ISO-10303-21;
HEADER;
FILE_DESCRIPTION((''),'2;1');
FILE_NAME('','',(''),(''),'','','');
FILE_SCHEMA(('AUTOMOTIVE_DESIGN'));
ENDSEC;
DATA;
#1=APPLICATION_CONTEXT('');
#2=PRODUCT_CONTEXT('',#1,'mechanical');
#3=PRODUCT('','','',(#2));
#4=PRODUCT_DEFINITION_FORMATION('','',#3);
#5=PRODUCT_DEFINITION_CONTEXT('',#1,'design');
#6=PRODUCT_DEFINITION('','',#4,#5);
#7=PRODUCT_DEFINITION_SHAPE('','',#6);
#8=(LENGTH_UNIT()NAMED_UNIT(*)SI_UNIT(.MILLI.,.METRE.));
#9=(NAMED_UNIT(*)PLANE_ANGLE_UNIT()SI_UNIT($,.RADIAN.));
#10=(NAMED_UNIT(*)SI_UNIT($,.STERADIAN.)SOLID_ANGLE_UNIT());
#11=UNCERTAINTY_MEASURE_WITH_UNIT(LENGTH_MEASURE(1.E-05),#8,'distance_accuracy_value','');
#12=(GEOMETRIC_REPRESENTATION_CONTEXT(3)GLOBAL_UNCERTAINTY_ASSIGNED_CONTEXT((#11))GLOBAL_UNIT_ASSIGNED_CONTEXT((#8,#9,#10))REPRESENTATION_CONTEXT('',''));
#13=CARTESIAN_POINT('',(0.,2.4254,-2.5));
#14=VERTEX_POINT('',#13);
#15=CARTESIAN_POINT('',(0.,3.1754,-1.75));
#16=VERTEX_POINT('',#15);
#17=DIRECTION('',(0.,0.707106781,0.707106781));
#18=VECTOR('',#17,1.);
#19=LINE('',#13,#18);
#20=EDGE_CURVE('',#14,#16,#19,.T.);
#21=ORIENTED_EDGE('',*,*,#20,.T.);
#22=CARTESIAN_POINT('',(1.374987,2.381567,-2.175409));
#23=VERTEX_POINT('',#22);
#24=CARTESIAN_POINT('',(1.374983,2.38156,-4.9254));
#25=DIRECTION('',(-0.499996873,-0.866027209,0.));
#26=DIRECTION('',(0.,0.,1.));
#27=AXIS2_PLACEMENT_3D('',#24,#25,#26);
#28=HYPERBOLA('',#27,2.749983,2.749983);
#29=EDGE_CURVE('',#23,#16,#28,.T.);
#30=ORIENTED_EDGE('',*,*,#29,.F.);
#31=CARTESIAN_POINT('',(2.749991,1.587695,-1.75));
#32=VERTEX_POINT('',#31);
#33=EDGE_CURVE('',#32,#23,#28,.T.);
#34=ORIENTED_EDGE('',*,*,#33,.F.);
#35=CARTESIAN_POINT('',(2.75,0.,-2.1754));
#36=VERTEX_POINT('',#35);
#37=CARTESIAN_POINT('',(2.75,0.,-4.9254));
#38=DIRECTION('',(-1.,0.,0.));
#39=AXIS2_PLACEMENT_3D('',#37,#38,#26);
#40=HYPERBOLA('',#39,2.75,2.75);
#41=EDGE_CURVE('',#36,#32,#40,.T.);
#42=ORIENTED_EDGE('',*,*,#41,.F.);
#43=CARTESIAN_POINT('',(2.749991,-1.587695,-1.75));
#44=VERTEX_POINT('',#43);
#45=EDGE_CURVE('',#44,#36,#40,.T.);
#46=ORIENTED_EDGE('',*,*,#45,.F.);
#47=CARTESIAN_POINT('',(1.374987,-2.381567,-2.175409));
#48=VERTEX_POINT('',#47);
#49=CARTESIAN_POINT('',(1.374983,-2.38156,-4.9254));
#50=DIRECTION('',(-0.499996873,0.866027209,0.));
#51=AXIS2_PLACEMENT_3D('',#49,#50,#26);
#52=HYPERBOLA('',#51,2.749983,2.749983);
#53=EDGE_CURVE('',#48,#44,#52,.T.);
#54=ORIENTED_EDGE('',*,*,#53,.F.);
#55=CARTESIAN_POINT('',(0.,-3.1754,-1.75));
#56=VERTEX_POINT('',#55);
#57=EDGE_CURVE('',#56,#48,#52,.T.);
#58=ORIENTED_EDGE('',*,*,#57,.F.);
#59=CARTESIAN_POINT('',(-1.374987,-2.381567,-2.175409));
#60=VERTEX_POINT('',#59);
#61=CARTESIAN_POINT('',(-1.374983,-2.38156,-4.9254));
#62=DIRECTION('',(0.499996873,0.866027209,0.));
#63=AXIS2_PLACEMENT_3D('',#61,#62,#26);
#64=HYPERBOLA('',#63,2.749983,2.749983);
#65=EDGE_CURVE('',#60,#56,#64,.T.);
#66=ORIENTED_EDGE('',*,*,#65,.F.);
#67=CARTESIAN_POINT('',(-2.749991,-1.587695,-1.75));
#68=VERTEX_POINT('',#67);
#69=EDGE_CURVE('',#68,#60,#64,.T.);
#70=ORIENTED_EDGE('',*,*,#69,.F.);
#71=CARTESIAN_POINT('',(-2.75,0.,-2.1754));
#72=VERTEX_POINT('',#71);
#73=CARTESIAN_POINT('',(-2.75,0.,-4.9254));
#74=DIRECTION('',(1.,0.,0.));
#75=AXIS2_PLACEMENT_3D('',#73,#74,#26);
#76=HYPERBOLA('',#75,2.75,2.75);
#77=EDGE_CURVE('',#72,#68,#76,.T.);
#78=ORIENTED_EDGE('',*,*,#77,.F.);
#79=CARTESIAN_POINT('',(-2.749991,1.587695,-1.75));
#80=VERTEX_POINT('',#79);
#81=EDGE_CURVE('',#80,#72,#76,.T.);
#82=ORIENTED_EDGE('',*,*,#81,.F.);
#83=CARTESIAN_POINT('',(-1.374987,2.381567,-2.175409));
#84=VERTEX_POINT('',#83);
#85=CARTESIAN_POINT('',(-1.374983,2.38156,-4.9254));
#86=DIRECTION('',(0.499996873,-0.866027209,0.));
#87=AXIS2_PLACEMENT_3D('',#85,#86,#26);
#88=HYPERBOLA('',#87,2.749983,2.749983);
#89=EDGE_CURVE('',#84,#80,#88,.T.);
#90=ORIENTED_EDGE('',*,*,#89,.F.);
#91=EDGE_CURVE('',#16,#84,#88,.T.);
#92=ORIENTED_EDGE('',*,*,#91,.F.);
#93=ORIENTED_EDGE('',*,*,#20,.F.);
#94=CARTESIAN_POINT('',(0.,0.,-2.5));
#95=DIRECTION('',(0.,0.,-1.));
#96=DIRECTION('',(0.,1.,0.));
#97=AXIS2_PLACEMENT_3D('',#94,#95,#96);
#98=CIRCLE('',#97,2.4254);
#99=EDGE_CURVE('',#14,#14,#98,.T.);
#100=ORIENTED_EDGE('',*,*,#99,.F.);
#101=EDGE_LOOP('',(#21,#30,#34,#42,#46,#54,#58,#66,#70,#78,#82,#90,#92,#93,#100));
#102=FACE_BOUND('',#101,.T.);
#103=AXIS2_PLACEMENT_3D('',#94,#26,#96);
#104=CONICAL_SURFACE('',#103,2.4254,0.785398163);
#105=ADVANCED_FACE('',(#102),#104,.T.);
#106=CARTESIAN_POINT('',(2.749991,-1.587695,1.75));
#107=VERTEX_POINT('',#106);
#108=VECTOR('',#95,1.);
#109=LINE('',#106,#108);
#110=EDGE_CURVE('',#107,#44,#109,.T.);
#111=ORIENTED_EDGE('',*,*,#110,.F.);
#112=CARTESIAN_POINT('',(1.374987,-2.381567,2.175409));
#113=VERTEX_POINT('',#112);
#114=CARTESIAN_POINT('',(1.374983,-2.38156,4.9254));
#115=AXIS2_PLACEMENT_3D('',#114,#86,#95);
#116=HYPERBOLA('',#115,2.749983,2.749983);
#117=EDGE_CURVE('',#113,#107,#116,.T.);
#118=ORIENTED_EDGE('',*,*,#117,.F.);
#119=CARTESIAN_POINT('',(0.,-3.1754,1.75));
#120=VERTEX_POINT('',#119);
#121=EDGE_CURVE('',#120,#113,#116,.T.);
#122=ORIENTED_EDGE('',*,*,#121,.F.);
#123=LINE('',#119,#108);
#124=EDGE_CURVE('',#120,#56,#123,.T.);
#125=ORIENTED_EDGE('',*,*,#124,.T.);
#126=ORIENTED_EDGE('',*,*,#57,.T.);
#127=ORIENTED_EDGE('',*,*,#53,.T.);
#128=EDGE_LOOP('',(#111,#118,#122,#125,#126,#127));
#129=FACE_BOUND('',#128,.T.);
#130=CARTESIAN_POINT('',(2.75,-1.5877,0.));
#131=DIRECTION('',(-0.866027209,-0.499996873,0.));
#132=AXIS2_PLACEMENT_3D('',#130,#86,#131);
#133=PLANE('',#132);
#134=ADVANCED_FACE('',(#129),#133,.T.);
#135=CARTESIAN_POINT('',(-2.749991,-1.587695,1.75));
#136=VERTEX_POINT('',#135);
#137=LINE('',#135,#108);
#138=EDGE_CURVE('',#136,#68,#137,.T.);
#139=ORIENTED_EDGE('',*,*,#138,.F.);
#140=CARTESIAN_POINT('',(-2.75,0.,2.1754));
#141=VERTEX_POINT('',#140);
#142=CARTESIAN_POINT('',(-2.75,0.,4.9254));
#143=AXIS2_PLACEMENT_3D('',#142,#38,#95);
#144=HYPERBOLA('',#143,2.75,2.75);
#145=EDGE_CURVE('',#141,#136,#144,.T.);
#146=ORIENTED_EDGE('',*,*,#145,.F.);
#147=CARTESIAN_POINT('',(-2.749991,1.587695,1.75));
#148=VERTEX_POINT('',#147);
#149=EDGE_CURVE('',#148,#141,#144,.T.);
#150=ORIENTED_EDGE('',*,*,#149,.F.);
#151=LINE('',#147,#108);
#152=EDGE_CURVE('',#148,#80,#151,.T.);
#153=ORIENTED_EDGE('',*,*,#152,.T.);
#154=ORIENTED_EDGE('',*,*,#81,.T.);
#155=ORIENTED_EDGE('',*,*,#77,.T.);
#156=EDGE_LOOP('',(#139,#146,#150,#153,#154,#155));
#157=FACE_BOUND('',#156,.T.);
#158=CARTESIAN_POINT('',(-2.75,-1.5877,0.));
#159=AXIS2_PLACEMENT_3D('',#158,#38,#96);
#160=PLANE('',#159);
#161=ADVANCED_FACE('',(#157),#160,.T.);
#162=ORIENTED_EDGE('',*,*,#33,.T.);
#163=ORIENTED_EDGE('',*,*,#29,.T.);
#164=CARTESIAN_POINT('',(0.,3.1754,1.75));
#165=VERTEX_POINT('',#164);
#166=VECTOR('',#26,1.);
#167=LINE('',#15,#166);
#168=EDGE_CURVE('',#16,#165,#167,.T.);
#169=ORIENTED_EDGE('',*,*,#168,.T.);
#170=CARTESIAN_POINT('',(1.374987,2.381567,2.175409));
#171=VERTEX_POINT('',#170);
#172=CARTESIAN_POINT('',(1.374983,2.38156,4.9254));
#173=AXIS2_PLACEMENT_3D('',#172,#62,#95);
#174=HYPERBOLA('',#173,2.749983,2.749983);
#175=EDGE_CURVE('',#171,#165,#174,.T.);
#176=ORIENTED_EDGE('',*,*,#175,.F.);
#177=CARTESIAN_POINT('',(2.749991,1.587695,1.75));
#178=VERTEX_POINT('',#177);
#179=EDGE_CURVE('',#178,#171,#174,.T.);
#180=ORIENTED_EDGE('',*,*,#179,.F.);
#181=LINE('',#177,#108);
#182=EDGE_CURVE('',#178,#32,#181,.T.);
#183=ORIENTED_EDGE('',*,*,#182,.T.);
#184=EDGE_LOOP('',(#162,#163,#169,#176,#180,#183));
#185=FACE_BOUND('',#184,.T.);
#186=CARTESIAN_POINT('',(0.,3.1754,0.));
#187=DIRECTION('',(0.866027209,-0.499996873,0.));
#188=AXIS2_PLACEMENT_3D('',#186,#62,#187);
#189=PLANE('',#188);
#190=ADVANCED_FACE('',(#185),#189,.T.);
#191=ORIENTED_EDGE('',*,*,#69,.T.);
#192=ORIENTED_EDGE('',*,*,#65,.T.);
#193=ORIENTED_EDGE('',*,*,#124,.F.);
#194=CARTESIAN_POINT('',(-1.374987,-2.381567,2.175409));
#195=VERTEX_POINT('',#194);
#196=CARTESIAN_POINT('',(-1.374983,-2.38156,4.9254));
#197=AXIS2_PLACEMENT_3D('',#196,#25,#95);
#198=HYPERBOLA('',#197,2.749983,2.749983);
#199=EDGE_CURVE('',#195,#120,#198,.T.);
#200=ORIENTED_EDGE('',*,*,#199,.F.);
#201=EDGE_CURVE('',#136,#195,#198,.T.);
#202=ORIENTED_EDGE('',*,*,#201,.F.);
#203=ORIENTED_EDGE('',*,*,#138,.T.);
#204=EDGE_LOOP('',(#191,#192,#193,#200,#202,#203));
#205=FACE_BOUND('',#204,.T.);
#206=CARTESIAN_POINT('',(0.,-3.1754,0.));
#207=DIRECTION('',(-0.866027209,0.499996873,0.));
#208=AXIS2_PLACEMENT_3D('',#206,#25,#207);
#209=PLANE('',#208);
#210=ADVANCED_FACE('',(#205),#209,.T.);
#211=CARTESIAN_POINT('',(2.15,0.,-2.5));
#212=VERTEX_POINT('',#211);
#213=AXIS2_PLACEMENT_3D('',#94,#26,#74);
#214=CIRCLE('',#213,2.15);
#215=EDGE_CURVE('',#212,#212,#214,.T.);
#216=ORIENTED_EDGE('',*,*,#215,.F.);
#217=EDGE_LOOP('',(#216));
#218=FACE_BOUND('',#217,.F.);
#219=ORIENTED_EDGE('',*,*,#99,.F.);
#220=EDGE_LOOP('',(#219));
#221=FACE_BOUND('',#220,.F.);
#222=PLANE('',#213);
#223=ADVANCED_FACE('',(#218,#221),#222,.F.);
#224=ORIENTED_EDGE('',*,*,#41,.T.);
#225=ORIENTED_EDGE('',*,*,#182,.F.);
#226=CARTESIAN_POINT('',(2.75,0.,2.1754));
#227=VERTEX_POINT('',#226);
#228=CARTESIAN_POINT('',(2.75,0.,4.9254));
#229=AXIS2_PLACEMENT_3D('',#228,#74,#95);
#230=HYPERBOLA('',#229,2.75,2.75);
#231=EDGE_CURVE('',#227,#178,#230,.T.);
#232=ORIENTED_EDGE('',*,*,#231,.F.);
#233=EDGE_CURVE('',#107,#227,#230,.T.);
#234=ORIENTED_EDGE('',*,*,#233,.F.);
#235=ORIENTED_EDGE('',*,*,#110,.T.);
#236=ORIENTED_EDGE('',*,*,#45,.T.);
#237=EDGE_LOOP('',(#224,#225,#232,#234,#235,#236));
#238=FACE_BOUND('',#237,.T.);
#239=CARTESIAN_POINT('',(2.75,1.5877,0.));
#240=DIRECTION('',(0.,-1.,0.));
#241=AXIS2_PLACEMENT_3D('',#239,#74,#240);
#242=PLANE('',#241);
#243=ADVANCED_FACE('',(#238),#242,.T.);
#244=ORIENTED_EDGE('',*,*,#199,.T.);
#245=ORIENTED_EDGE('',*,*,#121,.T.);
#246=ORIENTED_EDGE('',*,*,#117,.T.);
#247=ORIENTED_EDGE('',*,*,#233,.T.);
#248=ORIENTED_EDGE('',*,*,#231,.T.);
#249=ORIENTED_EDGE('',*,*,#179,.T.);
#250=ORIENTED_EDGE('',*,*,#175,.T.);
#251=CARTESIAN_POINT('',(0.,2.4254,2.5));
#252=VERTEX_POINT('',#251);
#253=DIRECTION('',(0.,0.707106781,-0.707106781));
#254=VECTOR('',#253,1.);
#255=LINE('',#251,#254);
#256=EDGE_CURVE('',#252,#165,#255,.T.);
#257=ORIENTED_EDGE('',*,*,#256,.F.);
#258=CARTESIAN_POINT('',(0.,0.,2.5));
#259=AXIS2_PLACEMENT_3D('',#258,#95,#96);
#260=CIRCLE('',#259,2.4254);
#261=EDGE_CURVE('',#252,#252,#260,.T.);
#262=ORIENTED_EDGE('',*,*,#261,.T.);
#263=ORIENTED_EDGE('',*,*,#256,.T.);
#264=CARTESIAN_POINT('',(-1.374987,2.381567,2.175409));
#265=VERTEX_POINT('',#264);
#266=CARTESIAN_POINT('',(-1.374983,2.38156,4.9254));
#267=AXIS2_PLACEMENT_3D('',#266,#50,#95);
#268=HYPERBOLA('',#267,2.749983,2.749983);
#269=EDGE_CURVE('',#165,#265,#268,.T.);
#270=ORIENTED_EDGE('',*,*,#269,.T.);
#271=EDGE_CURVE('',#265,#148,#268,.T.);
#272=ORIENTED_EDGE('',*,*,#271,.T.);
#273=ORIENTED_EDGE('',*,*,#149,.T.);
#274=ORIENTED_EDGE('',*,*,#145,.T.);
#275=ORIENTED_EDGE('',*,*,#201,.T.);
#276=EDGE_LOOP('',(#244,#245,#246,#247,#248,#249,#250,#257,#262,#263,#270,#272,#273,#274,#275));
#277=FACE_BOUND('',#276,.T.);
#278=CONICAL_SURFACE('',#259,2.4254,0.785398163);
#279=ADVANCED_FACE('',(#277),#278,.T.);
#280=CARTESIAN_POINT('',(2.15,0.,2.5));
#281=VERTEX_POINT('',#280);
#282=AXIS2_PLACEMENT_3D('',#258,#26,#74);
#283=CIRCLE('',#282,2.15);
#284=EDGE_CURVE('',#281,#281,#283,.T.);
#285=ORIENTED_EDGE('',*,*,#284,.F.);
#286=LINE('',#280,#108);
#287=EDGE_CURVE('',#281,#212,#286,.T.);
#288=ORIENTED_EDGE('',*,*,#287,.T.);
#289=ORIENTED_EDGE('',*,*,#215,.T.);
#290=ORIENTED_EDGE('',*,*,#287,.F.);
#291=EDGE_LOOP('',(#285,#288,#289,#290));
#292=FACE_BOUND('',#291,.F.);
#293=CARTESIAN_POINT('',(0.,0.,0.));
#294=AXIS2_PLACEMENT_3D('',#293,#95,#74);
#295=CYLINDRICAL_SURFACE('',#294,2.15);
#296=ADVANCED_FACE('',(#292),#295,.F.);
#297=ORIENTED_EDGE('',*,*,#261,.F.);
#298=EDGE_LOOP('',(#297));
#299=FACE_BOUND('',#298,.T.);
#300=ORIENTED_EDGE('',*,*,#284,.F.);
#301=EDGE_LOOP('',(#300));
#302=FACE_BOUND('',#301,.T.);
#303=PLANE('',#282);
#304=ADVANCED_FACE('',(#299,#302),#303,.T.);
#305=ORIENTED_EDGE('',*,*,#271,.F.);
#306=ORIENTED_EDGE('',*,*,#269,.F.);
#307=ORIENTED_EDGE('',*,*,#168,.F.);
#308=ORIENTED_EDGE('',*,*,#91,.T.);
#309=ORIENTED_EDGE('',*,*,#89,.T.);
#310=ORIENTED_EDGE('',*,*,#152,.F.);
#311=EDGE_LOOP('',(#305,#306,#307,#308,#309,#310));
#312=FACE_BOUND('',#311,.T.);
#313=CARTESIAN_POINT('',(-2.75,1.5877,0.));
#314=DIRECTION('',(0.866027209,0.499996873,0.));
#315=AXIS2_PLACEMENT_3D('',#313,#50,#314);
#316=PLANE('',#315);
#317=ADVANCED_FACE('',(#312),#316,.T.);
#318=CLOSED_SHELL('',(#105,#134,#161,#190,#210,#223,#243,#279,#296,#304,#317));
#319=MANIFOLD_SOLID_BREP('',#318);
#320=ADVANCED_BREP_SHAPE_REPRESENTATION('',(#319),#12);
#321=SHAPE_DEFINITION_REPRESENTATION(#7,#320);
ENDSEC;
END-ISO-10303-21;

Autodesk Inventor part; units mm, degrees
ref_plane "YZ Plane" through (0, 0, 0) normal (1, 0, 0) x (0, 1, 0)
ref_plane "XZ Plane" through (0, 0, 0) normal (0, 1, 0) x (-1, 0, 0)
ref_plane "XY Plane" through (0, 0, 0) normal (0, 0, 1) x (1, 0, 0)
sketch "Sketch1" plane through (0, 0, 0) normal (0, 0, 1) x (1, 0, 0)
  circle A0 centre (0, 0) radius 2.15
  circle A1 centre (0, 0) radius 2.75
  line L0 (0, 3.1754) -> (2.75, 1.5877)
  line L1 (2.75, 1.5877) -> (2.75, -1.5877)
  line L2 (2.75, -1.5877) -> (0, -3.1754)
  line L3 (0, -3.1754) -> (-2.75, -1.5877)
  line L4 (-2.75, -1.5877) -> (-2.75, 1.5877)
  line L5 (-2.75, 1.5877) -> (0, 3.1754)
  dimension "d0" = 4.3
  dimension "d1" = 5.5
extrude "Extrusion1" add sketch "Sketch1" along normal mid plane 5
sketch "Sketch2" plane through (0, 0, 0) normal (1, 0, 0) x (0, 1, 0)
  line L0 (3.1754, 2.5) -> (1.5877, 2.5) projected
  line L1 (3.1754, 2.5) -> (3.1754, 1.75)
  line L2 (3.1754, 2.5) -> (2.4254, 2.5)
  line L3 (2.4254, 2.5) -> (3.1754, 1.75)
  line L4 (1.5877, 2.5) -> (-1.5877, 2.5) projected
  line L5 (0, 2.5) -> (0, -2.5) construction
  line L6 (2.15, -2.5) -> (-2.15, -2.5) projected
  line L7 (1.5877, -2.5) -> (3.1754, -2.5) projected
  line L8 (3.1754, -2.5) -> (3.1754, -1.75)
  line L9 (3.1754, -2.5) -> (2.4254, -2.5)
  line L10 (2.4254, -2.5) -> (3.1754, -1.75)
  point P0 (0, 0)
  dimension "d4" = 0.75
  dimension "d5" = 0.75
  dimension "d6" = 0.75
  dimension "d7" = 0.75
revolve "Revolution1" cut sketch "Sketch2" angle 360 about axis through (0, 0, 2.5) along (0, 0, -1)
thread "Thread3" size "M4.5x0.75" class "6H" standard "ANSI Metric M Profile" length 5
properties part number "L3 Part 7" material "Stainless Steel"
